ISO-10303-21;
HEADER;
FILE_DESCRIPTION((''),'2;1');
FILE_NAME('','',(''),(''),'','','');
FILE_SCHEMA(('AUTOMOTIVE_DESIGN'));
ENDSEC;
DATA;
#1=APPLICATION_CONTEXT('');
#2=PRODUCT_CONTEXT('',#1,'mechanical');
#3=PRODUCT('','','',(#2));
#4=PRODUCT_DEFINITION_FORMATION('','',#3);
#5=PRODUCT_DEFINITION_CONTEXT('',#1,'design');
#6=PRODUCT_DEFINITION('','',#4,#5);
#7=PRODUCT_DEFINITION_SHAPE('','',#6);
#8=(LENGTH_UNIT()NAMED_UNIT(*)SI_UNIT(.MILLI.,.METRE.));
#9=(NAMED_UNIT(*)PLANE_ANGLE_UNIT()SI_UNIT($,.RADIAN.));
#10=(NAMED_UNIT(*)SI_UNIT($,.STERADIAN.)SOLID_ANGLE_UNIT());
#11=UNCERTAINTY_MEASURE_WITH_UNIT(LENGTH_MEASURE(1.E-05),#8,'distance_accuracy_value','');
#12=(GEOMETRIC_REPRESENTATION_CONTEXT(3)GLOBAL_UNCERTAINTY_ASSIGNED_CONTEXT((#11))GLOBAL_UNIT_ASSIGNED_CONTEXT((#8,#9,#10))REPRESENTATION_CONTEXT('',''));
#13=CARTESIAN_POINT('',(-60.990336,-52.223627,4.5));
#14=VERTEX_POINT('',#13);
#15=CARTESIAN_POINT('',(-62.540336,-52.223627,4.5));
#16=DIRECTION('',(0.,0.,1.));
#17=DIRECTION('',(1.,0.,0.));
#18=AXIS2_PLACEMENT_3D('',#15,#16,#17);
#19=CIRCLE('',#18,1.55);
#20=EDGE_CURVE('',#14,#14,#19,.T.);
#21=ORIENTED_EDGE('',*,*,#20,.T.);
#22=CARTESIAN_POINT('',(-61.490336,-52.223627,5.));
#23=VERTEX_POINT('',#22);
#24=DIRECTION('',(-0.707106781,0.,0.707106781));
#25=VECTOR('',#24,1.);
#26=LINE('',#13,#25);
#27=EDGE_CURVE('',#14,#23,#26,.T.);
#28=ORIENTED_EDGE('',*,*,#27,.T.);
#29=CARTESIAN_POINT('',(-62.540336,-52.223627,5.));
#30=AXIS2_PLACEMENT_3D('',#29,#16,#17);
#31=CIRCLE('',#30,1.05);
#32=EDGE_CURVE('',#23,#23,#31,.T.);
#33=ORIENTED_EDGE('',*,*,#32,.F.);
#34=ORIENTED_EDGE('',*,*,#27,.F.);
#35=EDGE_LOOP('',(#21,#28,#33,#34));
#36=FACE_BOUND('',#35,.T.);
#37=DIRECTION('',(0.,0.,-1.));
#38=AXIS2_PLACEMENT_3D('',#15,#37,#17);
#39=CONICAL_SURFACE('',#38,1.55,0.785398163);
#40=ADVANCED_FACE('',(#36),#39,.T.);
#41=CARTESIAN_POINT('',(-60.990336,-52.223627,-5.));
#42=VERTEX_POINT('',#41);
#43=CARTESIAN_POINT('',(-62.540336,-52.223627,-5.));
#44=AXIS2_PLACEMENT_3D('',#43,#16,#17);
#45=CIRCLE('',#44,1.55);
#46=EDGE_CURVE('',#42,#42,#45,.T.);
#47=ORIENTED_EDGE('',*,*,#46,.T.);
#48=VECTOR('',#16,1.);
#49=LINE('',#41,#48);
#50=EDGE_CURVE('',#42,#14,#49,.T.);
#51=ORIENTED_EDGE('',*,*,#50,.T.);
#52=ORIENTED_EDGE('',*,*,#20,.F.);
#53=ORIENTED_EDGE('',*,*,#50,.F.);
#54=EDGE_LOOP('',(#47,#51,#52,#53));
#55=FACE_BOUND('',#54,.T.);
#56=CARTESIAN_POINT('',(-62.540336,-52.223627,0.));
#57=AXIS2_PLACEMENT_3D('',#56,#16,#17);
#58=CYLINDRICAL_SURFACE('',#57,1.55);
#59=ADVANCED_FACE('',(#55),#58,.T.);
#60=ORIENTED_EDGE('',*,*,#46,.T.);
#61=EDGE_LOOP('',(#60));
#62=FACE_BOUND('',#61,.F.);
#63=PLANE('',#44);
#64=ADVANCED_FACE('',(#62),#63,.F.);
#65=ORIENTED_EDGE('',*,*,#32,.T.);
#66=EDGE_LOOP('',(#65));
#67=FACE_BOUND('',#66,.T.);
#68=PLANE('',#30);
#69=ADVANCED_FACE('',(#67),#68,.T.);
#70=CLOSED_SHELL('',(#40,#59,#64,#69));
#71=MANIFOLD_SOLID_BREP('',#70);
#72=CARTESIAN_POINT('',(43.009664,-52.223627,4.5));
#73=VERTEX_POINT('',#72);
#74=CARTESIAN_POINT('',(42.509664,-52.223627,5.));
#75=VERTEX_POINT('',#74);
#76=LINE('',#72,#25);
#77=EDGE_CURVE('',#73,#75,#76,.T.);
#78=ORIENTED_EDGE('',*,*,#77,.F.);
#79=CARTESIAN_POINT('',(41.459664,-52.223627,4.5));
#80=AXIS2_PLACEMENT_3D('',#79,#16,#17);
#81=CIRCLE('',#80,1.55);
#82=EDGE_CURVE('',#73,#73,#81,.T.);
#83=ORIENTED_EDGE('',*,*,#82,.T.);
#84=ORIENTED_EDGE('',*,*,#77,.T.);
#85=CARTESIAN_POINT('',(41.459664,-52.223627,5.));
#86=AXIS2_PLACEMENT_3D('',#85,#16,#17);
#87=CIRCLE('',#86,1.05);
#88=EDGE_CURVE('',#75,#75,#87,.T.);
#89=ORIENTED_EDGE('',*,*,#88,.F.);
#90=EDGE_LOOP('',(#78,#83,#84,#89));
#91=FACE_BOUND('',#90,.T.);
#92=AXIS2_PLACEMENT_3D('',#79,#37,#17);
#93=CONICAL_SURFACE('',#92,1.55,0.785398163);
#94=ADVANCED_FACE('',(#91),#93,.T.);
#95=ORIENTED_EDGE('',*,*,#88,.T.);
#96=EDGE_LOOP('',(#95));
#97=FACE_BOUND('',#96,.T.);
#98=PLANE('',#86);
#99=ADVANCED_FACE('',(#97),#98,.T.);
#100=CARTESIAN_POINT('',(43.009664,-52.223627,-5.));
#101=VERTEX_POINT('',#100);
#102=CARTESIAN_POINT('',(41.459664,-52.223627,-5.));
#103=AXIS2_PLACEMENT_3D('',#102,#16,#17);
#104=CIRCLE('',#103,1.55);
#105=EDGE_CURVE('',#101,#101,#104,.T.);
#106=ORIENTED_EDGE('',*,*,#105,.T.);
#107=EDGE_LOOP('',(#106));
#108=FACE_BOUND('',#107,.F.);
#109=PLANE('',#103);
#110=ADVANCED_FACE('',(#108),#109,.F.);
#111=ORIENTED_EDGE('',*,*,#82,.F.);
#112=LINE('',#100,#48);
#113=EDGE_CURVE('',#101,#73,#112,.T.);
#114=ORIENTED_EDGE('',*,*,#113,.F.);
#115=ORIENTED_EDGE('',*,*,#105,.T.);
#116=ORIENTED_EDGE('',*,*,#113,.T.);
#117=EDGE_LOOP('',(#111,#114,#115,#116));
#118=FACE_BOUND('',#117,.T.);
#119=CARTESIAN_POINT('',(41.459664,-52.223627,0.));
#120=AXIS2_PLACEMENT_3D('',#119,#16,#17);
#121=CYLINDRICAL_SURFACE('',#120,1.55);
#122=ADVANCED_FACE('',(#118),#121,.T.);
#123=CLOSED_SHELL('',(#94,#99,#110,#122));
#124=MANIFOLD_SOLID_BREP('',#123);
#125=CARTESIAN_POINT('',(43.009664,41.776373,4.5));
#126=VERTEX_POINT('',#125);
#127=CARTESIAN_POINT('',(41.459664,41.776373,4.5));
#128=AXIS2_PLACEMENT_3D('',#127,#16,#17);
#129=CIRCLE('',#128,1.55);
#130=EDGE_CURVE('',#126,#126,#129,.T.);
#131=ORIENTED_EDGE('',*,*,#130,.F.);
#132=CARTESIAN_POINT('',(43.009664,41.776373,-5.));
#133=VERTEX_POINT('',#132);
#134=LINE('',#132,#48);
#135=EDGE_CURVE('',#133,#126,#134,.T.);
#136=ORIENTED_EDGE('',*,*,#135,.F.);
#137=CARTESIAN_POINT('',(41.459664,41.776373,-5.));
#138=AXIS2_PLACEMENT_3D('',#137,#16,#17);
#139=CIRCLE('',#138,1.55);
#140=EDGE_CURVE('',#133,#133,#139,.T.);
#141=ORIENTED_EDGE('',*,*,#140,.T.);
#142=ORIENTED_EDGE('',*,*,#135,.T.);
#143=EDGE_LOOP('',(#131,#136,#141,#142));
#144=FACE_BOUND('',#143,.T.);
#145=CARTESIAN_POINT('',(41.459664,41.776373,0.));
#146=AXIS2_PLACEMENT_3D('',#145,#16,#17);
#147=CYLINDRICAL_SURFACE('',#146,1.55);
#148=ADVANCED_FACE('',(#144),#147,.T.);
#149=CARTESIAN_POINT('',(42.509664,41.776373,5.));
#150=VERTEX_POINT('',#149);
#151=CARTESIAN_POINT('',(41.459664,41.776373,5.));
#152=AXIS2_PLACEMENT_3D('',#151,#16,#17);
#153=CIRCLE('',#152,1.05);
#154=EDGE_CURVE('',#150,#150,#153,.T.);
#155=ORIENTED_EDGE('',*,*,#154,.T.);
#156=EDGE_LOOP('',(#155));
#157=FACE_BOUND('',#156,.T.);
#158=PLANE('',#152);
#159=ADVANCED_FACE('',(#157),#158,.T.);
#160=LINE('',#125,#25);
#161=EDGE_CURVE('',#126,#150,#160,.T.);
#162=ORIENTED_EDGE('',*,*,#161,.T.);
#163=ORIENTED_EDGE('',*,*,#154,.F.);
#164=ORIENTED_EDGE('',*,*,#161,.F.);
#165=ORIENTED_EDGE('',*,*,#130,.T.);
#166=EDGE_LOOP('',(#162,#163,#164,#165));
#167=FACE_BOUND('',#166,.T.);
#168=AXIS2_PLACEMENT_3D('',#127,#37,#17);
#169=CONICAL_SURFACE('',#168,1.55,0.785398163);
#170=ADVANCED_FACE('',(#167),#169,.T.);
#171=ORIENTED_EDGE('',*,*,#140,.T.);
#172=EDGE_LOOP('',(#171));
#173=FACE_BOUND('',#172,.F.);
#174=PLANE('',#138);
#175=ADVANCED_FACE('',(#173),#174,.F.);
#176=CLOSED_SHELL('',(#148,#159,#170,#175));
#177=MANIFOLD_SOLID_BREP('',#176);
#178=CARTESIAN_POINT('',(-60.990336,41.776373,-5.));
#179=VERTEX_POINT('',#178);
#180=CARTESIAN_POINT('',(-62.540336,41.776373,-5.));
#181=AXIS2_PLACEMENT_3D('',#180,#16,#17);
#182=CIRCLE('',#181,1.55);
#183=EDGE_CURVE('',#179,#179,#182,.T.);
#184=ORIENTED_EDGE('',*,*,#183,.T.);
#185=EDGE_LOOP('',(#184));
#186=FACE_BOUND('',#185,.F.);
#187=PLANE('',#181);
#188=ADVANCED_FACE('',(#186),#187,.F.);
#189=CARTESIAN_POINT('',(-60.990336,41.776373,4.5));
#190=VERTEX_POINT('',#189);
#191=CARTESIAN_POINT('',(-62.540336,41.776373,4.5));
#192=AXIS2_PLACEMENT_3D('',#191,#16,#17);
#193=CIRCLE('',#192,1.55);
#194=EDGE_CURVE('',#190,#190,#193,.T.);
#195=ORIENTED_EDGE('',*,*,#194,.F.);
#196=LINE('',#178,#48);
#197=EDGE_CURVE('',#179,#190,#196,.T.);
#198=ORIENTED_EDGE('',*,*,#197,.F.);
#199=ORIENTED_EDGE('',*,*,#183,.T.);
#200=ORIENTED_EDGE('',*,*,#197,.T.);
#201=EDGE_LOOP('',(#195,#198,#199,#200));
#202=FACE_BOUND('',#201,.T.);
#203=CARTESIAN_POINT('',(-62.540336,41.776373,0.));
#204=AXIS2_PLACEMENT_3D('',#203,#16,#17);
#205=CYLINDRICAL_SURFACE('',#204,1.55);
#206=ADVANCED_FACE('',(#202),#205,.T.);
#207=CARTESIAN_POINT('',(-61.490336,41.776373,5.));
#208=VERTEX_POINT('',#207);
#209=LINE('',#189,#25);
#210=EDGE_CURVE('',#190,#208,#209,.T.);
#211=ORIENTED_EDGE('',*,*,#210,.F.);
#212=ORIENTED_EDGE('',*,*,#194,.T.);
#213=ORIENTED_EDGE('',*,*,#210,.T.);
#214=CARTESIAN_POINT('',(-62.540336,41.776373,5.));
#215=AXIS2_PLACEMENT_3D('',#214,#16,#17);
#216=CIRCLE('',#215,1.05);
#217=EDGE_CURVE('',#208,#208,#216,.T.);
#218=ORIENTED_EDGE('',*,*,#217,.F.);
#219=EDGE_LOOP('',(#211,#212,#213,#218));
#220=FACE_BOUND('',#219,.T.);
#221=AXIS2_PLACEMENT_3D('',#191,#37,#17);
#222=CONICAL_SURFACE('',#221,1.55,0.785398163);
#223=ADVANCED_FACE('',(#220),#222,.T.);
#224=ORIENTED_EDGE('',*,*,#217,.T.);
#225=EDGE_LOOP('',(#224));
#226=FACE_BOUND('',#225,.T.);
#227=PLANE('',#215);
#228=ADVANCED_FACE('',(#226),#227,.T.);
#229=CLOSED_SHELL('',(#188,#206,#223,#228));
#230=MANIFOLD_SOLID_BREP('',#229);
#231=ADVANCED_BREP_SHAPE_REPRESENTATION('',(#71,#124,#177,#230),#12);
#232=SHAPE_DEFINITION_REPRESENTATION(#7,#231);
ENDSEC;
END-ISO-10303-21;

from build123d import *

# Parameters (mm, degrees)
F0_R      = 1.55
F5_DEPTH  = 5
F6_SIZE   = 0.5
F7_DEPTH  = 5
F8_SIZE   = 0.5
F9_DEPTH  = 5
F10_SIZE  = 0.5
F11_DEPTH = 5
F12_SIZE  = 0.5


# Not quite as in the source:
# - the program builds the solid bodies; features that only make, move or delete a surface that nothing else refers to are left out


with BuildPart() as f5:
    # F0 (on Top) → F5 (new body, symmetric)
    with BuildSketch(Plane.XY):
        with Locations((-62.5403363705, -52.2236271612)):
            Circle(F0_R)
    extrude(amount=F5_DEPTH, both=True)

    # F6
    f6_edges = [f5.edges().sort_by_distance(p)[0] for p in [
        (-64.090336, -52.223627, 5),
    ]]
    chamfer(f6_edges, length=F6_SIZE)


with BuildPart() as f7:
    # F0 (on Top) → F7 (new body, symmetric)
    with BuildSketch(Plane.XY):
        with Locations((41.4596636295, -52.2236271612)):
            Circle(F0_R)
    extrude(amount=F7_DEPTH, both=True)

    # F8
    f8_edges = [f7.edges().sort_by_distance(p)[0] for p in [
        (39.909664, -52.223627, 5),
    ]]
    chamfer(f8_edges, length=F8_SIZE)


with BuildPart() as f9:
    # F0 (on Top) → F9 (new body, symmetric)
    with BuildSketch(Plane.XY):
        with Locations((41.4596636295, 41.7763728388)):
            Circle(F0_R)
    extrude(amount=F9_DEPTH, both=True)

    # F10
    f10_edges = [f9.edges().sort_by_distance(p)[0] for p in [
        (39.909664, 41.776373, 5),
    ]]
    chamfer(f10_edges, length=F10_SIZE)


with BuildPart() as f11:
    # F0 (on Top) → F11 (new body, symmetric)
    with BuildSketch(Plane.XY):
        with Locations((-62.5403363705, 41.7763728388)):
            Circle(F0_R)
    extrude(amount=F11_DEPTH, both=True)

    # F12
    f12_edges = [f11.edges().sort_by_distance(p)[0] for p in [
        (-64.090336, 41.776373, 5),
    ]]
    chamfer(f12_edges, length=F12_SIZE)


solid = Compound([f5.part, f7.part, f9.part, f11.part])
